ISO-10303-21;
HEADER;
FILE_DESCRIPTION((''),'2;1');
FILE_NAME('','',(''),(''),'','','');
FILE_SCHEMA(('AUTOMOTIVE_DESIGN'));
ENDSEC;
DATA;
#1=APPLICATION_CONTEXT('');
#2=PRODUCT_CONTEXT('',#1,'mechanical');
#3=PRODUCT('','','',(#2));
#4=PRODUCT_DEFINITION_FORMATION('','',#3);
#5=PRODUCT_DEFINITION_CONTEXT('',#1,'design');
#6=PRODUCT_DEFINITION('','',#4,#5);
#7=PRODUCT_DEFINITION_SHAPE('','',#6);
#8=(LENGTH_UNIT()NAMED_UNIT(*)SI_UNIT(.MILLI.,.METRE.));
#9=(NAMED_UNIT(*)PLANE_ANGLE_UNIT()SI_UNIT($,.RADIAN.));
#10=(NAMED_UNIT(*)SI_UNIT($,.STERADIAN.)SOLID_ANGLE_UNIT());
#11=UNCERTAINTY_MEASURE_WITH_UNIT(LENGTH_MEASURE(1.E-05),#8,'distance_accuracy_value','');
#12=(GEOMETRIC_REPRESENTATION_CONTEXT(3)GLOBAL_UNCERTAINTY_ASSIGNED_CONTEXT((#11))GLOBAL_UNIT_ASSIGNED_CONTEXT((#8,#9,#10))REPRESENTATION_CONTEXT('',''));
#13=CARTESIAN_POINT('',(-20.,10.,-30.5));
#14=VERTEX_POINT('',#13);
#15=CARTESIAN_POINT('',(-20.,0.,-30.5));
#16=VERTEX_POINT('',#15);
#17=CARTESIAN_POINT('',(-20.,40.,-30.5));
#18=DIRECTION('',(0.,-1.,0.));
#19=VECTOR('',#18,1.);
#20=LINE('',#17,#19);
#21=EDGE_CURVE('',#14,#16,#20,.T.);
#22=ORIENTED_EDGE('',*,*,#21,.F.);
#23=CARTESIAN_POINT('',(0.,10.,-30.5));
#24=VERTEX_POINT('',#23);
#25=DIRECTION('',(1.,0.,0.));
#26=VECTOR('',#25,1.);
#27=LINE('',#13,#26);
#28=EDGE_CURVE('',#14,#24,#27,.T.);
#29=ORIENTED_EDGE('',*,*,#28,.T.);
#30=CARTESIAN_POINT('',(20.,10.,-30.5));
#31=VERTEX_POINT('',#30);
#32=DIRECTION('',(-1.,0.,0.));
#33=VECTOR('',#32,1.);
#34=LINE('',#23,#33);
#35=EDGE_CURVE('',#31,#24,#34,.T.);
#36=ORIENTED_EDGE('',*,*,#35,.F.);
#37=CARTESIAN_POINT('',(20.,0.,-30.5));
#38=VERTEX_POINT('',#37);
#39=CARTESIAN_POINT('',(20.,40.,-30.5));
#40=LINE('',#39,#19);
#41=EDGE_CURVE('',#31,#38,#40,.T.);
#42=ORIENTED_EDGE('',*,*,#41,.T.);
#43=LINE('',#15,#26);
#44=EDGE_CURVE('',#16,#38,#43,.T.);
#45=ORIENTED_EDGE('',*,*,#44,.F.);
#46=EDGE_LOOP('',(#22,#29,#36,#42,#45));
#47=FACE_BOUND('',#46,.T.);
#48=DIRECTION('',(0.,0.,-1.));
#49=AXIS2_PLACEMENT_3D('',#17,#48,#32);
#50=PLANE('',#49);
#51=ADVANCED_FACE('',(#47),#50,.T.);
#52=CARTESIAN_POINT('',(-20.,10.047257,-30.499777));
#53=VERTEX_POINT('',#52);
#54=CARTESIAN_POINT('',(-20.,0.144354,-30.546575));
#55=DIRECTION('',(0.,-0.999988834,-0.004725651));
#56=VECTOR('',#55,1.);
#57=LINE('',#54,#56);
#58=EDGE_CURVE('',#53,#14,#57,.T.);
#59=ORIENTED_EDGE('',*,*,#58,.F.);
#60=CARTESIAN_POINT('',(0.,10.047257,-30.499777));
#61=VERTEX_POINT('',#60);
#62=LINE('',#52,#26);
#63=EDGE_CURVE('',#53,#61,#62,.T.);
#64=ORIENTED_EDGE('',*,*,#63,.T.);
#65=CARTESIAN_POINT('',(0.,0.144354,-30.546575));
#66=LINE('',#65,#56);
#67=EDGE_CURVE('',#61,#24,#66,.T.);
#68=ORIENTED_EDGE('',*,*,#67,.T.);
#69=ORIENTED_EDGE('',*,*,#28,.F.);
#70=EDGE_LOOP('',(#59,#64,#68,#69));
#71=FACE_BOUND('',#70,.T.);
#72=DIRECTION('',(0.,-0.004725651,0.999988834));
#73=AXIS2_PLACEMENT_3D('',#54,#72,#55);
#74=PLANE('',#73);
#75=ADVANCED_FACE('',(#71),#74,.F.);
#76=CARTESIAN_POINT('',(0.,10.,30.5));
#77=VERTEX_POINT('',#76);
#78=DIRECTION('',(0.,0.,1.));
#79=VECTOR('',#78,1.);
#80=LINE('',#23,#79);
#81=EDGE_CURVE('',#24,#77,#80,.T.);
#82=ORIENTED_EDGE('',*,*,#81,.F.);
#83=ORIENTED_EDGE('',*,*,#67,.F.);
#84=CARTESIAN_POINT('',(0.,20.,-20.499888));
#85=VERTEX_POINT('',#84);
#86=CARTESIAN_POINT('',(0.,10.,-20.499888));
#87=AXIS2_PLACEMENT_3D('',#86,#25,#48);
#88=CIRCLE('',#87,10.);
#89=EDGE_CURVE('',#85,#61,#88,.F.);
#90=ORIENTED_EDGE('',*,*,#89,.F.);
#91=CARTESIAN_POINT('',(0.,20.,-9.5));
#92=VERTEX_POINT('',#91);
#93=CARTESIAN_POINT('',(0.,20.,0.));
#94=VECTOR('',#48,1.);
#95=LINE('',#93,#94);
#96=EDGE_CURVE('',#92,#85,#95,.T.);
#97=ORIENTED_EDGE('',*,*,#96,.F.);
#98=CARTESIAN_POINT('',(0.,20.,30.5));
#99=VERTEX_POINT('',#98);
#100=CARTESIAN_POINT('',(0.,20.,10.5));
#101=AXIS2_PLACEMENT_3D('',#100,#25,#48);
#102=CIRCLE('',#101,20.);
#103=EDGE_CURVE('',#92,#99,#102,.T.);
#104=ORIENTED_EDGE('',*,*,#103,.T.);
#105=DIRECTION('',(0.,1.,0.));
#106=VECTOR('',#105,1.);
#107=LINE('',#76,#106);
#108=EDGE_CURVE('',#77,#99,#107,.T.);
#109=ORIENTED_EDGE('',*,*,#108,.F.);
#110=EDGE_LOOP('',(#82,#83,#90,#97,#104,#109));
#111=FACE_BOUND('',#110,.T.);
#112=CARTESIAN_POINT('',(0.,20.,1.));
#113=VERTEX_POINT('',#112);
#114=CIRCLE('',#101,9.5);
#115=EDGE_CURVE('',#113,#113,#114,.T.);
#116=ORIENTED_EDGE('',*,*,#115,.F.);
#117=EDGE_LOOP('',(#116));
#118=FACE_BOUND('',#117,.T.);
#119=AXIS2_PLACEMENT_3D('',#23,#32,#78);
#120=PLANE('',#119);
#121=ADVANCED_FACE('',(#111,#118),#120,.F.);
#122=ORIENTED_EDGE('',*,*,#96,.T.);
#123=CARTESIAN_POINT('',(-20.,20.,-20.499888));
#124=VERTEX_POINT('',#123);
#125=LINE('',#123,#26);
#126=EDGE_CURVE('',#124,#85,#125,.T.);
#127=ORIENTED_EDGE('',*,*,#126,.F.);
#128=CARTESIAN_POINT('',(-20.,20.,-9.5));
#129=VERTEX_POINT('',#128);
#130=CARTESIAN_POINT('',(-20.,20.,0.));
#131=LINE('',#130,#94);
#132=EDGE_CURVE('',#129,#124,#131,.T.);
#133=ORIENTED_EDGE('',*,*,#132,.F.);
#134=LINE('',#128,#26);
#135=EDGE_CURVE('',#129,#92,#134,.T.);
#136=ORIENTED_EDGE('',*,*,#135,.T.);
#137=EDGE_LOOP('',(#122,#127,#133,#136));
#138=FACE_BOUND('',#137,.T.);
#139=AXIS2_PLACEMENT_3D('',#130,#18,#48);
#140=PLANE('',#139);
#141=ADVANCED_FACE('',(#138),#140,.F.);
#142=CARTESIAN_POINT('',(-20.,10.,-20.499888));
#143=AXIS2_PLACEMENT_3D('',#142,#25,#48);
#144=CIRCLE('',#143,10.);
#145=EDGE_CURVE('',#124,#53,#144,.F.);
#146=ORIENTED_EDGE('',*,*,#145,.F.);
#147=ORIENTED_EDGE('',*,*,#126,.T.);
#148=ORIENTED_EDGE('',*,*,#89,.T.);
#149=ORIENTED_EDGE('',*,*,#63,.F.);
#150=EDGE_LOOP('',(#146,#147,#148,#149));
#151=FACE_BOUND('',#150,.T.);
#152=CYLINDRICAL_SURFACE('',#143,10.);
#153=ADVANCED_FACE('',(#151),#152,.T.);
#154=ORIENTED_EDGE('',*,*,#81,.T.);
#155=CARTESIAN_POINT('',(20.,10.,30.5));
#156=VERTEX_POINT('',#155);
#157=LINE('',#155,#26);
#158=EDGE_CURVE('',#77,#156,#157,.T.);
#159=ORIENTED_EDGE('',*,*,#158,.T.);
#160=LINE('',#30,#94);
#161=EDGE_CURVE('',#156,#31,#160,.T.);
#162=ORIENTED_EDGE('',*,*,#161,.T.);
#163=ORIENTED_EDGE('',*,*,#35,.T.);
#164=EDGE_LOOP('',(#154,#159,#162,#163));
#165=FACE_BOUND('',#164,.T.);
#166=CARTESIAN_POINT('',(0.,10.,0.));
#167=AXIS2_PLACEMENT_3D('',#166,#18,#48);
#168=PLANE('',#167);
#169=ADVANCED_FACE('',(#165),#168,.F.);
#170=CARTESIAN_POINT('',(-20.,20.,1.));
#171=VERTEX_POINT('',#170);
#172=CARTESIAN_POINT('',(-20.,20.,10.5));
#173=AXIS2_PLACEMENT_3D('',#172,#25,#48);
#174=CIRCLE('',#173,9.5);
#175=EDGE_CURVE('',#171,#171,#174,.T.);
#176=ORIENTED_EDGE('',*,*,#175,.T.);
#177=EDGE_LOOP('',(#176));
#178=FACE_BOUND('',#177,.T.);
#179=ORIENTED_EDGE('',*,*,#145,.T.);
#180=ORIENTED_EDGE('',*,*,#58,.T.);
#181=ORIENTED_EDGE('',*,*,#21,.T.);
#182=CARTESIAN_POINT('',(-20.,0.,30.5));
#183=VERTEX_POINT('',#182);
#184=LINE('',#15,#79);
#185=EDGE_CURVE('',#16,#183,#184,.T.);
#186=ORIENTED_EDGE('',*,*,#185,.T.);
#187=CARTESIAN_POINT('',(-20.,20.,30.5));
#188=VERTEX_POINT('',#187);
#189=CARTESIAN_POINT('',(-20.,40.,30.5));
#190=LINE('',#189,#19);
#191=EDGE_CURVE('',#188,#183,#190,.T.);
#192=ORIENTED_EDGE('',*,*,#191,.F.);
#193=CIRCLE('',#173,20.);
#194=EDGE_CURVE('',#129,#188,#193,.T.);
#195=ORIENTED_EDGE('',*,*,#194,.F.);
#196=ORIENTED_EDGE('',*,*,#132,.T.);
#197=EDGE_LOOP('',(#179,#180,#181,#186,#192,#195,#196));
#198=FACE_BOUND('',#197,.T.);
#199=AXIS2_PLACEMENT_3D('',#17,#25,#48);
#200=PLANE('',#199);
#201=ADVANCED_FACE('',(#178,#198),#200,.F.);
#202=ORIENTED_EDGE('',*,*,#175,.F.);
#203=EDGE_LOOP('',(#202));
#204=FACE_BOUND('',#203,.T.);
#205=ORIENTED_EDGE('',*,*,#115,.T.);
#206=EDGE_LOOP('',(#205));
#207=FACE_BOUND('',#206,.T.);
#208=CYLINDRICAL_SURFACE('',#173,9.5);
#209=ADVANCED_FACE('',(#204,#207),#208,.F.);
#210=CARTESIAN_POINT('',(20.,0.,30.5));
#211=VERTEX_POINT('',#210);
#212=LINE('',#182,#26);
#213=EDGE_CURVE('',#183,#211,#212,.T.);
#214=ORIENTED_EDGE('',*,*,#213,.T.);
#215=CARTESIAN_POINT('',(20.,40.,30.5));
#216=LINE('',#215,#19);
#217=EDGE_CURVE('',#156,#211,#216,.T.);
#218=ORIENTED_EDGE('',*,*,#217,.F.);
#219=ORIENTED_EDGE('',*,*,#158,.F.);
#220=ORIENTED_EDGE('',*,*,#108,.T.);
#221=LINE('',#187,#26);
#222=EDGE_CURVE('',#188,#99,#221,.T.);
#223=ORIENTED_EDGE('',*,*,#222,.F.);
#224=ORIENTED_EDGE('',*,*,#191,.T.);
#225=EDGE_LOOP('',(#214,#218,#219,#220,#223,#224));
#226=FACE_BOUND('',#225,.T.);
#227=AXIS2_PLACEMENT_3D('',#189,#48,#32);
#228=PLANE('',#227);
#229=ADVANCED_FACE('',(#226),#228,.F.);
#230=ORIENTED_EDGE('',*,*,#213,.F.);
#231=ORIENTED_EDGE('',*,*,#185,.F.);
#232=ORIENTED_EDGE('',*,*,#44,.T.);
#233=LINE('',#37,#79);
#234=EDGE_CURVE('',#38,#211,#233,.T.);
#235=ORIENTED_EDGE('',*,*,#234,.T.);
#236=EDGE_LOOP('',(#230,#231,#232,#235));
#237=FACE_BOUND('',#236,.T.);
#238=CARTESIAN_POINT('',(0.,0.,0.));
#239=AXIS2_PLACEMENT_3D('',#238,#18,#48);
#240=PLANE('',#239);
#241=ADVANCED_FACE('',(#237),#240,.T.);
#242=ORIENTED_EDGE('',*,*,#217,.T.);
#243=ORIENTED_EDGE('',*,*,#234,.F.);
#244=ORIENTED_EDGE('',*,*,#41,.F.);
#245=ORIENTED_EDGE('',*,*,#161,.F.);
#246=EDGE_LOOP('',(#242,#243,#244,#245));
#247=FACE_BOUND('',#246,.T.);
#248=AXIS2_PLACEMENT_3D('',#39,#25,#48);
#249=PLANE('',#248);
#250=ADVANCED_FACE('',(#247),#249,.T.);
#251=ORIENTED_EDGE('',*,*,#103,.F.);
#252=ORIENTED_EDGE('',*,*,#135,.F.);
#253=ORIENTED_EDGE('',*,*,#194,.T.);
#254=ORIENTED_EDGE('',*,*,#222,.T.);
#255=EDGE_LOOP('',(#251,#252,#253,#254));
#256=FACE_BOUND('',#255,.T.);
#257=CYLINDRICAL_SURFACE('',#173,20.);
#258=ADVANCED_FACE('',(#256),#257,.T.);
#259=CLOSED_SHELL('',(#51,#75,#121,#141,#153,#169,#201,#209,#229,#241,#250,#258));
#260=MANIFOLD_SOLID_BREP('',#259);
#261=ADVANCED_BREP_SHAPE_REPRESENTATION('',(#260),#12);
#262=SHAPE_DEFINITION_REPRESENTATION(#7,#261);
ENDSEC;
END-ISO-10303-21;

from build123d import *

# Parameters (mm, degrees)
SKETCH1_W           = 40
SKETCH1_H           = 61
BOSS_EXTRUDE1_DEPTH = 40
SKETCH2_W           = 20
SKETCH2_H           = 61
CUT_EXTRUDE1_DEPTH  = 30
SKETCH3_R           = 9.5
CUT_EXTRUDE3_DEPTH  = 55.13178364


with BuildPart() as part:
    # Sketch1 → Boss-Extrude1 (new body)
    with BuildSketch(Plane(origin=(0, 0, 0), x_dir=(1, 0, 0), z_dir=(0, 1, 0))):
        Rectangle(SKETCH1_W, SKETCH1_H)
    extrude(amount=BOSS_EXTRUDE1_DEPTH)

    # Sketch2 → Cut-Extrude1 (cut)
    with BuildSketch(Plane(origin=(0, 40, 0), x_dir=(1, 0, 0), z_dir=(0, 1, 0))):
        with Locations((10, 0)):
            Rectangle(SKETCH2_W, SKETCH2_H)
    extrude(amount=-CUT_EXTRUDE1_DEPTH, mode=Mode.SUBTRACT)

    # Sketch3 → Cut-Extrude3 (cut, through all)
    with BuildSketch(Plane(origin=(0, 0, 0), x_dir=(0, 0, -1), z_dir=(1, 0, 0))):
        with Locations((-10.5, 20)):
            Circle(SKETCH3_R)
        with BuildLine():
            Line((30.5, 40), (-10.5, 40))
            ThreePointArc((-10.5, 40), (3.642135624, 34.142135624), (9.5, 20))
            Line((9.5, 20), (20.499888339, 20))
            ThreePointArc((20.499888339, 20), (27.554228667, 17.087755818), (30.49977668, 10.047256507))
            Line((30.49977668, 10.047256507), (30.5, 10))
            Line((30.5, 10), (30.5, 40))
        make_face()
        with BuildLine():
            Line((-30.5, 40), (-30.5, 20))
            ThreePointArc((-30.5, 20), (-24.642135624, 34.142135624), (-10.5, 40))
            Line((-10.5, 40), (-30.5, 40))
        make_face()
    extrude(amount=-CUT_EXTRUDE3_DEPTH, mode=Mode.SUBTRACT)


solid = part.part
